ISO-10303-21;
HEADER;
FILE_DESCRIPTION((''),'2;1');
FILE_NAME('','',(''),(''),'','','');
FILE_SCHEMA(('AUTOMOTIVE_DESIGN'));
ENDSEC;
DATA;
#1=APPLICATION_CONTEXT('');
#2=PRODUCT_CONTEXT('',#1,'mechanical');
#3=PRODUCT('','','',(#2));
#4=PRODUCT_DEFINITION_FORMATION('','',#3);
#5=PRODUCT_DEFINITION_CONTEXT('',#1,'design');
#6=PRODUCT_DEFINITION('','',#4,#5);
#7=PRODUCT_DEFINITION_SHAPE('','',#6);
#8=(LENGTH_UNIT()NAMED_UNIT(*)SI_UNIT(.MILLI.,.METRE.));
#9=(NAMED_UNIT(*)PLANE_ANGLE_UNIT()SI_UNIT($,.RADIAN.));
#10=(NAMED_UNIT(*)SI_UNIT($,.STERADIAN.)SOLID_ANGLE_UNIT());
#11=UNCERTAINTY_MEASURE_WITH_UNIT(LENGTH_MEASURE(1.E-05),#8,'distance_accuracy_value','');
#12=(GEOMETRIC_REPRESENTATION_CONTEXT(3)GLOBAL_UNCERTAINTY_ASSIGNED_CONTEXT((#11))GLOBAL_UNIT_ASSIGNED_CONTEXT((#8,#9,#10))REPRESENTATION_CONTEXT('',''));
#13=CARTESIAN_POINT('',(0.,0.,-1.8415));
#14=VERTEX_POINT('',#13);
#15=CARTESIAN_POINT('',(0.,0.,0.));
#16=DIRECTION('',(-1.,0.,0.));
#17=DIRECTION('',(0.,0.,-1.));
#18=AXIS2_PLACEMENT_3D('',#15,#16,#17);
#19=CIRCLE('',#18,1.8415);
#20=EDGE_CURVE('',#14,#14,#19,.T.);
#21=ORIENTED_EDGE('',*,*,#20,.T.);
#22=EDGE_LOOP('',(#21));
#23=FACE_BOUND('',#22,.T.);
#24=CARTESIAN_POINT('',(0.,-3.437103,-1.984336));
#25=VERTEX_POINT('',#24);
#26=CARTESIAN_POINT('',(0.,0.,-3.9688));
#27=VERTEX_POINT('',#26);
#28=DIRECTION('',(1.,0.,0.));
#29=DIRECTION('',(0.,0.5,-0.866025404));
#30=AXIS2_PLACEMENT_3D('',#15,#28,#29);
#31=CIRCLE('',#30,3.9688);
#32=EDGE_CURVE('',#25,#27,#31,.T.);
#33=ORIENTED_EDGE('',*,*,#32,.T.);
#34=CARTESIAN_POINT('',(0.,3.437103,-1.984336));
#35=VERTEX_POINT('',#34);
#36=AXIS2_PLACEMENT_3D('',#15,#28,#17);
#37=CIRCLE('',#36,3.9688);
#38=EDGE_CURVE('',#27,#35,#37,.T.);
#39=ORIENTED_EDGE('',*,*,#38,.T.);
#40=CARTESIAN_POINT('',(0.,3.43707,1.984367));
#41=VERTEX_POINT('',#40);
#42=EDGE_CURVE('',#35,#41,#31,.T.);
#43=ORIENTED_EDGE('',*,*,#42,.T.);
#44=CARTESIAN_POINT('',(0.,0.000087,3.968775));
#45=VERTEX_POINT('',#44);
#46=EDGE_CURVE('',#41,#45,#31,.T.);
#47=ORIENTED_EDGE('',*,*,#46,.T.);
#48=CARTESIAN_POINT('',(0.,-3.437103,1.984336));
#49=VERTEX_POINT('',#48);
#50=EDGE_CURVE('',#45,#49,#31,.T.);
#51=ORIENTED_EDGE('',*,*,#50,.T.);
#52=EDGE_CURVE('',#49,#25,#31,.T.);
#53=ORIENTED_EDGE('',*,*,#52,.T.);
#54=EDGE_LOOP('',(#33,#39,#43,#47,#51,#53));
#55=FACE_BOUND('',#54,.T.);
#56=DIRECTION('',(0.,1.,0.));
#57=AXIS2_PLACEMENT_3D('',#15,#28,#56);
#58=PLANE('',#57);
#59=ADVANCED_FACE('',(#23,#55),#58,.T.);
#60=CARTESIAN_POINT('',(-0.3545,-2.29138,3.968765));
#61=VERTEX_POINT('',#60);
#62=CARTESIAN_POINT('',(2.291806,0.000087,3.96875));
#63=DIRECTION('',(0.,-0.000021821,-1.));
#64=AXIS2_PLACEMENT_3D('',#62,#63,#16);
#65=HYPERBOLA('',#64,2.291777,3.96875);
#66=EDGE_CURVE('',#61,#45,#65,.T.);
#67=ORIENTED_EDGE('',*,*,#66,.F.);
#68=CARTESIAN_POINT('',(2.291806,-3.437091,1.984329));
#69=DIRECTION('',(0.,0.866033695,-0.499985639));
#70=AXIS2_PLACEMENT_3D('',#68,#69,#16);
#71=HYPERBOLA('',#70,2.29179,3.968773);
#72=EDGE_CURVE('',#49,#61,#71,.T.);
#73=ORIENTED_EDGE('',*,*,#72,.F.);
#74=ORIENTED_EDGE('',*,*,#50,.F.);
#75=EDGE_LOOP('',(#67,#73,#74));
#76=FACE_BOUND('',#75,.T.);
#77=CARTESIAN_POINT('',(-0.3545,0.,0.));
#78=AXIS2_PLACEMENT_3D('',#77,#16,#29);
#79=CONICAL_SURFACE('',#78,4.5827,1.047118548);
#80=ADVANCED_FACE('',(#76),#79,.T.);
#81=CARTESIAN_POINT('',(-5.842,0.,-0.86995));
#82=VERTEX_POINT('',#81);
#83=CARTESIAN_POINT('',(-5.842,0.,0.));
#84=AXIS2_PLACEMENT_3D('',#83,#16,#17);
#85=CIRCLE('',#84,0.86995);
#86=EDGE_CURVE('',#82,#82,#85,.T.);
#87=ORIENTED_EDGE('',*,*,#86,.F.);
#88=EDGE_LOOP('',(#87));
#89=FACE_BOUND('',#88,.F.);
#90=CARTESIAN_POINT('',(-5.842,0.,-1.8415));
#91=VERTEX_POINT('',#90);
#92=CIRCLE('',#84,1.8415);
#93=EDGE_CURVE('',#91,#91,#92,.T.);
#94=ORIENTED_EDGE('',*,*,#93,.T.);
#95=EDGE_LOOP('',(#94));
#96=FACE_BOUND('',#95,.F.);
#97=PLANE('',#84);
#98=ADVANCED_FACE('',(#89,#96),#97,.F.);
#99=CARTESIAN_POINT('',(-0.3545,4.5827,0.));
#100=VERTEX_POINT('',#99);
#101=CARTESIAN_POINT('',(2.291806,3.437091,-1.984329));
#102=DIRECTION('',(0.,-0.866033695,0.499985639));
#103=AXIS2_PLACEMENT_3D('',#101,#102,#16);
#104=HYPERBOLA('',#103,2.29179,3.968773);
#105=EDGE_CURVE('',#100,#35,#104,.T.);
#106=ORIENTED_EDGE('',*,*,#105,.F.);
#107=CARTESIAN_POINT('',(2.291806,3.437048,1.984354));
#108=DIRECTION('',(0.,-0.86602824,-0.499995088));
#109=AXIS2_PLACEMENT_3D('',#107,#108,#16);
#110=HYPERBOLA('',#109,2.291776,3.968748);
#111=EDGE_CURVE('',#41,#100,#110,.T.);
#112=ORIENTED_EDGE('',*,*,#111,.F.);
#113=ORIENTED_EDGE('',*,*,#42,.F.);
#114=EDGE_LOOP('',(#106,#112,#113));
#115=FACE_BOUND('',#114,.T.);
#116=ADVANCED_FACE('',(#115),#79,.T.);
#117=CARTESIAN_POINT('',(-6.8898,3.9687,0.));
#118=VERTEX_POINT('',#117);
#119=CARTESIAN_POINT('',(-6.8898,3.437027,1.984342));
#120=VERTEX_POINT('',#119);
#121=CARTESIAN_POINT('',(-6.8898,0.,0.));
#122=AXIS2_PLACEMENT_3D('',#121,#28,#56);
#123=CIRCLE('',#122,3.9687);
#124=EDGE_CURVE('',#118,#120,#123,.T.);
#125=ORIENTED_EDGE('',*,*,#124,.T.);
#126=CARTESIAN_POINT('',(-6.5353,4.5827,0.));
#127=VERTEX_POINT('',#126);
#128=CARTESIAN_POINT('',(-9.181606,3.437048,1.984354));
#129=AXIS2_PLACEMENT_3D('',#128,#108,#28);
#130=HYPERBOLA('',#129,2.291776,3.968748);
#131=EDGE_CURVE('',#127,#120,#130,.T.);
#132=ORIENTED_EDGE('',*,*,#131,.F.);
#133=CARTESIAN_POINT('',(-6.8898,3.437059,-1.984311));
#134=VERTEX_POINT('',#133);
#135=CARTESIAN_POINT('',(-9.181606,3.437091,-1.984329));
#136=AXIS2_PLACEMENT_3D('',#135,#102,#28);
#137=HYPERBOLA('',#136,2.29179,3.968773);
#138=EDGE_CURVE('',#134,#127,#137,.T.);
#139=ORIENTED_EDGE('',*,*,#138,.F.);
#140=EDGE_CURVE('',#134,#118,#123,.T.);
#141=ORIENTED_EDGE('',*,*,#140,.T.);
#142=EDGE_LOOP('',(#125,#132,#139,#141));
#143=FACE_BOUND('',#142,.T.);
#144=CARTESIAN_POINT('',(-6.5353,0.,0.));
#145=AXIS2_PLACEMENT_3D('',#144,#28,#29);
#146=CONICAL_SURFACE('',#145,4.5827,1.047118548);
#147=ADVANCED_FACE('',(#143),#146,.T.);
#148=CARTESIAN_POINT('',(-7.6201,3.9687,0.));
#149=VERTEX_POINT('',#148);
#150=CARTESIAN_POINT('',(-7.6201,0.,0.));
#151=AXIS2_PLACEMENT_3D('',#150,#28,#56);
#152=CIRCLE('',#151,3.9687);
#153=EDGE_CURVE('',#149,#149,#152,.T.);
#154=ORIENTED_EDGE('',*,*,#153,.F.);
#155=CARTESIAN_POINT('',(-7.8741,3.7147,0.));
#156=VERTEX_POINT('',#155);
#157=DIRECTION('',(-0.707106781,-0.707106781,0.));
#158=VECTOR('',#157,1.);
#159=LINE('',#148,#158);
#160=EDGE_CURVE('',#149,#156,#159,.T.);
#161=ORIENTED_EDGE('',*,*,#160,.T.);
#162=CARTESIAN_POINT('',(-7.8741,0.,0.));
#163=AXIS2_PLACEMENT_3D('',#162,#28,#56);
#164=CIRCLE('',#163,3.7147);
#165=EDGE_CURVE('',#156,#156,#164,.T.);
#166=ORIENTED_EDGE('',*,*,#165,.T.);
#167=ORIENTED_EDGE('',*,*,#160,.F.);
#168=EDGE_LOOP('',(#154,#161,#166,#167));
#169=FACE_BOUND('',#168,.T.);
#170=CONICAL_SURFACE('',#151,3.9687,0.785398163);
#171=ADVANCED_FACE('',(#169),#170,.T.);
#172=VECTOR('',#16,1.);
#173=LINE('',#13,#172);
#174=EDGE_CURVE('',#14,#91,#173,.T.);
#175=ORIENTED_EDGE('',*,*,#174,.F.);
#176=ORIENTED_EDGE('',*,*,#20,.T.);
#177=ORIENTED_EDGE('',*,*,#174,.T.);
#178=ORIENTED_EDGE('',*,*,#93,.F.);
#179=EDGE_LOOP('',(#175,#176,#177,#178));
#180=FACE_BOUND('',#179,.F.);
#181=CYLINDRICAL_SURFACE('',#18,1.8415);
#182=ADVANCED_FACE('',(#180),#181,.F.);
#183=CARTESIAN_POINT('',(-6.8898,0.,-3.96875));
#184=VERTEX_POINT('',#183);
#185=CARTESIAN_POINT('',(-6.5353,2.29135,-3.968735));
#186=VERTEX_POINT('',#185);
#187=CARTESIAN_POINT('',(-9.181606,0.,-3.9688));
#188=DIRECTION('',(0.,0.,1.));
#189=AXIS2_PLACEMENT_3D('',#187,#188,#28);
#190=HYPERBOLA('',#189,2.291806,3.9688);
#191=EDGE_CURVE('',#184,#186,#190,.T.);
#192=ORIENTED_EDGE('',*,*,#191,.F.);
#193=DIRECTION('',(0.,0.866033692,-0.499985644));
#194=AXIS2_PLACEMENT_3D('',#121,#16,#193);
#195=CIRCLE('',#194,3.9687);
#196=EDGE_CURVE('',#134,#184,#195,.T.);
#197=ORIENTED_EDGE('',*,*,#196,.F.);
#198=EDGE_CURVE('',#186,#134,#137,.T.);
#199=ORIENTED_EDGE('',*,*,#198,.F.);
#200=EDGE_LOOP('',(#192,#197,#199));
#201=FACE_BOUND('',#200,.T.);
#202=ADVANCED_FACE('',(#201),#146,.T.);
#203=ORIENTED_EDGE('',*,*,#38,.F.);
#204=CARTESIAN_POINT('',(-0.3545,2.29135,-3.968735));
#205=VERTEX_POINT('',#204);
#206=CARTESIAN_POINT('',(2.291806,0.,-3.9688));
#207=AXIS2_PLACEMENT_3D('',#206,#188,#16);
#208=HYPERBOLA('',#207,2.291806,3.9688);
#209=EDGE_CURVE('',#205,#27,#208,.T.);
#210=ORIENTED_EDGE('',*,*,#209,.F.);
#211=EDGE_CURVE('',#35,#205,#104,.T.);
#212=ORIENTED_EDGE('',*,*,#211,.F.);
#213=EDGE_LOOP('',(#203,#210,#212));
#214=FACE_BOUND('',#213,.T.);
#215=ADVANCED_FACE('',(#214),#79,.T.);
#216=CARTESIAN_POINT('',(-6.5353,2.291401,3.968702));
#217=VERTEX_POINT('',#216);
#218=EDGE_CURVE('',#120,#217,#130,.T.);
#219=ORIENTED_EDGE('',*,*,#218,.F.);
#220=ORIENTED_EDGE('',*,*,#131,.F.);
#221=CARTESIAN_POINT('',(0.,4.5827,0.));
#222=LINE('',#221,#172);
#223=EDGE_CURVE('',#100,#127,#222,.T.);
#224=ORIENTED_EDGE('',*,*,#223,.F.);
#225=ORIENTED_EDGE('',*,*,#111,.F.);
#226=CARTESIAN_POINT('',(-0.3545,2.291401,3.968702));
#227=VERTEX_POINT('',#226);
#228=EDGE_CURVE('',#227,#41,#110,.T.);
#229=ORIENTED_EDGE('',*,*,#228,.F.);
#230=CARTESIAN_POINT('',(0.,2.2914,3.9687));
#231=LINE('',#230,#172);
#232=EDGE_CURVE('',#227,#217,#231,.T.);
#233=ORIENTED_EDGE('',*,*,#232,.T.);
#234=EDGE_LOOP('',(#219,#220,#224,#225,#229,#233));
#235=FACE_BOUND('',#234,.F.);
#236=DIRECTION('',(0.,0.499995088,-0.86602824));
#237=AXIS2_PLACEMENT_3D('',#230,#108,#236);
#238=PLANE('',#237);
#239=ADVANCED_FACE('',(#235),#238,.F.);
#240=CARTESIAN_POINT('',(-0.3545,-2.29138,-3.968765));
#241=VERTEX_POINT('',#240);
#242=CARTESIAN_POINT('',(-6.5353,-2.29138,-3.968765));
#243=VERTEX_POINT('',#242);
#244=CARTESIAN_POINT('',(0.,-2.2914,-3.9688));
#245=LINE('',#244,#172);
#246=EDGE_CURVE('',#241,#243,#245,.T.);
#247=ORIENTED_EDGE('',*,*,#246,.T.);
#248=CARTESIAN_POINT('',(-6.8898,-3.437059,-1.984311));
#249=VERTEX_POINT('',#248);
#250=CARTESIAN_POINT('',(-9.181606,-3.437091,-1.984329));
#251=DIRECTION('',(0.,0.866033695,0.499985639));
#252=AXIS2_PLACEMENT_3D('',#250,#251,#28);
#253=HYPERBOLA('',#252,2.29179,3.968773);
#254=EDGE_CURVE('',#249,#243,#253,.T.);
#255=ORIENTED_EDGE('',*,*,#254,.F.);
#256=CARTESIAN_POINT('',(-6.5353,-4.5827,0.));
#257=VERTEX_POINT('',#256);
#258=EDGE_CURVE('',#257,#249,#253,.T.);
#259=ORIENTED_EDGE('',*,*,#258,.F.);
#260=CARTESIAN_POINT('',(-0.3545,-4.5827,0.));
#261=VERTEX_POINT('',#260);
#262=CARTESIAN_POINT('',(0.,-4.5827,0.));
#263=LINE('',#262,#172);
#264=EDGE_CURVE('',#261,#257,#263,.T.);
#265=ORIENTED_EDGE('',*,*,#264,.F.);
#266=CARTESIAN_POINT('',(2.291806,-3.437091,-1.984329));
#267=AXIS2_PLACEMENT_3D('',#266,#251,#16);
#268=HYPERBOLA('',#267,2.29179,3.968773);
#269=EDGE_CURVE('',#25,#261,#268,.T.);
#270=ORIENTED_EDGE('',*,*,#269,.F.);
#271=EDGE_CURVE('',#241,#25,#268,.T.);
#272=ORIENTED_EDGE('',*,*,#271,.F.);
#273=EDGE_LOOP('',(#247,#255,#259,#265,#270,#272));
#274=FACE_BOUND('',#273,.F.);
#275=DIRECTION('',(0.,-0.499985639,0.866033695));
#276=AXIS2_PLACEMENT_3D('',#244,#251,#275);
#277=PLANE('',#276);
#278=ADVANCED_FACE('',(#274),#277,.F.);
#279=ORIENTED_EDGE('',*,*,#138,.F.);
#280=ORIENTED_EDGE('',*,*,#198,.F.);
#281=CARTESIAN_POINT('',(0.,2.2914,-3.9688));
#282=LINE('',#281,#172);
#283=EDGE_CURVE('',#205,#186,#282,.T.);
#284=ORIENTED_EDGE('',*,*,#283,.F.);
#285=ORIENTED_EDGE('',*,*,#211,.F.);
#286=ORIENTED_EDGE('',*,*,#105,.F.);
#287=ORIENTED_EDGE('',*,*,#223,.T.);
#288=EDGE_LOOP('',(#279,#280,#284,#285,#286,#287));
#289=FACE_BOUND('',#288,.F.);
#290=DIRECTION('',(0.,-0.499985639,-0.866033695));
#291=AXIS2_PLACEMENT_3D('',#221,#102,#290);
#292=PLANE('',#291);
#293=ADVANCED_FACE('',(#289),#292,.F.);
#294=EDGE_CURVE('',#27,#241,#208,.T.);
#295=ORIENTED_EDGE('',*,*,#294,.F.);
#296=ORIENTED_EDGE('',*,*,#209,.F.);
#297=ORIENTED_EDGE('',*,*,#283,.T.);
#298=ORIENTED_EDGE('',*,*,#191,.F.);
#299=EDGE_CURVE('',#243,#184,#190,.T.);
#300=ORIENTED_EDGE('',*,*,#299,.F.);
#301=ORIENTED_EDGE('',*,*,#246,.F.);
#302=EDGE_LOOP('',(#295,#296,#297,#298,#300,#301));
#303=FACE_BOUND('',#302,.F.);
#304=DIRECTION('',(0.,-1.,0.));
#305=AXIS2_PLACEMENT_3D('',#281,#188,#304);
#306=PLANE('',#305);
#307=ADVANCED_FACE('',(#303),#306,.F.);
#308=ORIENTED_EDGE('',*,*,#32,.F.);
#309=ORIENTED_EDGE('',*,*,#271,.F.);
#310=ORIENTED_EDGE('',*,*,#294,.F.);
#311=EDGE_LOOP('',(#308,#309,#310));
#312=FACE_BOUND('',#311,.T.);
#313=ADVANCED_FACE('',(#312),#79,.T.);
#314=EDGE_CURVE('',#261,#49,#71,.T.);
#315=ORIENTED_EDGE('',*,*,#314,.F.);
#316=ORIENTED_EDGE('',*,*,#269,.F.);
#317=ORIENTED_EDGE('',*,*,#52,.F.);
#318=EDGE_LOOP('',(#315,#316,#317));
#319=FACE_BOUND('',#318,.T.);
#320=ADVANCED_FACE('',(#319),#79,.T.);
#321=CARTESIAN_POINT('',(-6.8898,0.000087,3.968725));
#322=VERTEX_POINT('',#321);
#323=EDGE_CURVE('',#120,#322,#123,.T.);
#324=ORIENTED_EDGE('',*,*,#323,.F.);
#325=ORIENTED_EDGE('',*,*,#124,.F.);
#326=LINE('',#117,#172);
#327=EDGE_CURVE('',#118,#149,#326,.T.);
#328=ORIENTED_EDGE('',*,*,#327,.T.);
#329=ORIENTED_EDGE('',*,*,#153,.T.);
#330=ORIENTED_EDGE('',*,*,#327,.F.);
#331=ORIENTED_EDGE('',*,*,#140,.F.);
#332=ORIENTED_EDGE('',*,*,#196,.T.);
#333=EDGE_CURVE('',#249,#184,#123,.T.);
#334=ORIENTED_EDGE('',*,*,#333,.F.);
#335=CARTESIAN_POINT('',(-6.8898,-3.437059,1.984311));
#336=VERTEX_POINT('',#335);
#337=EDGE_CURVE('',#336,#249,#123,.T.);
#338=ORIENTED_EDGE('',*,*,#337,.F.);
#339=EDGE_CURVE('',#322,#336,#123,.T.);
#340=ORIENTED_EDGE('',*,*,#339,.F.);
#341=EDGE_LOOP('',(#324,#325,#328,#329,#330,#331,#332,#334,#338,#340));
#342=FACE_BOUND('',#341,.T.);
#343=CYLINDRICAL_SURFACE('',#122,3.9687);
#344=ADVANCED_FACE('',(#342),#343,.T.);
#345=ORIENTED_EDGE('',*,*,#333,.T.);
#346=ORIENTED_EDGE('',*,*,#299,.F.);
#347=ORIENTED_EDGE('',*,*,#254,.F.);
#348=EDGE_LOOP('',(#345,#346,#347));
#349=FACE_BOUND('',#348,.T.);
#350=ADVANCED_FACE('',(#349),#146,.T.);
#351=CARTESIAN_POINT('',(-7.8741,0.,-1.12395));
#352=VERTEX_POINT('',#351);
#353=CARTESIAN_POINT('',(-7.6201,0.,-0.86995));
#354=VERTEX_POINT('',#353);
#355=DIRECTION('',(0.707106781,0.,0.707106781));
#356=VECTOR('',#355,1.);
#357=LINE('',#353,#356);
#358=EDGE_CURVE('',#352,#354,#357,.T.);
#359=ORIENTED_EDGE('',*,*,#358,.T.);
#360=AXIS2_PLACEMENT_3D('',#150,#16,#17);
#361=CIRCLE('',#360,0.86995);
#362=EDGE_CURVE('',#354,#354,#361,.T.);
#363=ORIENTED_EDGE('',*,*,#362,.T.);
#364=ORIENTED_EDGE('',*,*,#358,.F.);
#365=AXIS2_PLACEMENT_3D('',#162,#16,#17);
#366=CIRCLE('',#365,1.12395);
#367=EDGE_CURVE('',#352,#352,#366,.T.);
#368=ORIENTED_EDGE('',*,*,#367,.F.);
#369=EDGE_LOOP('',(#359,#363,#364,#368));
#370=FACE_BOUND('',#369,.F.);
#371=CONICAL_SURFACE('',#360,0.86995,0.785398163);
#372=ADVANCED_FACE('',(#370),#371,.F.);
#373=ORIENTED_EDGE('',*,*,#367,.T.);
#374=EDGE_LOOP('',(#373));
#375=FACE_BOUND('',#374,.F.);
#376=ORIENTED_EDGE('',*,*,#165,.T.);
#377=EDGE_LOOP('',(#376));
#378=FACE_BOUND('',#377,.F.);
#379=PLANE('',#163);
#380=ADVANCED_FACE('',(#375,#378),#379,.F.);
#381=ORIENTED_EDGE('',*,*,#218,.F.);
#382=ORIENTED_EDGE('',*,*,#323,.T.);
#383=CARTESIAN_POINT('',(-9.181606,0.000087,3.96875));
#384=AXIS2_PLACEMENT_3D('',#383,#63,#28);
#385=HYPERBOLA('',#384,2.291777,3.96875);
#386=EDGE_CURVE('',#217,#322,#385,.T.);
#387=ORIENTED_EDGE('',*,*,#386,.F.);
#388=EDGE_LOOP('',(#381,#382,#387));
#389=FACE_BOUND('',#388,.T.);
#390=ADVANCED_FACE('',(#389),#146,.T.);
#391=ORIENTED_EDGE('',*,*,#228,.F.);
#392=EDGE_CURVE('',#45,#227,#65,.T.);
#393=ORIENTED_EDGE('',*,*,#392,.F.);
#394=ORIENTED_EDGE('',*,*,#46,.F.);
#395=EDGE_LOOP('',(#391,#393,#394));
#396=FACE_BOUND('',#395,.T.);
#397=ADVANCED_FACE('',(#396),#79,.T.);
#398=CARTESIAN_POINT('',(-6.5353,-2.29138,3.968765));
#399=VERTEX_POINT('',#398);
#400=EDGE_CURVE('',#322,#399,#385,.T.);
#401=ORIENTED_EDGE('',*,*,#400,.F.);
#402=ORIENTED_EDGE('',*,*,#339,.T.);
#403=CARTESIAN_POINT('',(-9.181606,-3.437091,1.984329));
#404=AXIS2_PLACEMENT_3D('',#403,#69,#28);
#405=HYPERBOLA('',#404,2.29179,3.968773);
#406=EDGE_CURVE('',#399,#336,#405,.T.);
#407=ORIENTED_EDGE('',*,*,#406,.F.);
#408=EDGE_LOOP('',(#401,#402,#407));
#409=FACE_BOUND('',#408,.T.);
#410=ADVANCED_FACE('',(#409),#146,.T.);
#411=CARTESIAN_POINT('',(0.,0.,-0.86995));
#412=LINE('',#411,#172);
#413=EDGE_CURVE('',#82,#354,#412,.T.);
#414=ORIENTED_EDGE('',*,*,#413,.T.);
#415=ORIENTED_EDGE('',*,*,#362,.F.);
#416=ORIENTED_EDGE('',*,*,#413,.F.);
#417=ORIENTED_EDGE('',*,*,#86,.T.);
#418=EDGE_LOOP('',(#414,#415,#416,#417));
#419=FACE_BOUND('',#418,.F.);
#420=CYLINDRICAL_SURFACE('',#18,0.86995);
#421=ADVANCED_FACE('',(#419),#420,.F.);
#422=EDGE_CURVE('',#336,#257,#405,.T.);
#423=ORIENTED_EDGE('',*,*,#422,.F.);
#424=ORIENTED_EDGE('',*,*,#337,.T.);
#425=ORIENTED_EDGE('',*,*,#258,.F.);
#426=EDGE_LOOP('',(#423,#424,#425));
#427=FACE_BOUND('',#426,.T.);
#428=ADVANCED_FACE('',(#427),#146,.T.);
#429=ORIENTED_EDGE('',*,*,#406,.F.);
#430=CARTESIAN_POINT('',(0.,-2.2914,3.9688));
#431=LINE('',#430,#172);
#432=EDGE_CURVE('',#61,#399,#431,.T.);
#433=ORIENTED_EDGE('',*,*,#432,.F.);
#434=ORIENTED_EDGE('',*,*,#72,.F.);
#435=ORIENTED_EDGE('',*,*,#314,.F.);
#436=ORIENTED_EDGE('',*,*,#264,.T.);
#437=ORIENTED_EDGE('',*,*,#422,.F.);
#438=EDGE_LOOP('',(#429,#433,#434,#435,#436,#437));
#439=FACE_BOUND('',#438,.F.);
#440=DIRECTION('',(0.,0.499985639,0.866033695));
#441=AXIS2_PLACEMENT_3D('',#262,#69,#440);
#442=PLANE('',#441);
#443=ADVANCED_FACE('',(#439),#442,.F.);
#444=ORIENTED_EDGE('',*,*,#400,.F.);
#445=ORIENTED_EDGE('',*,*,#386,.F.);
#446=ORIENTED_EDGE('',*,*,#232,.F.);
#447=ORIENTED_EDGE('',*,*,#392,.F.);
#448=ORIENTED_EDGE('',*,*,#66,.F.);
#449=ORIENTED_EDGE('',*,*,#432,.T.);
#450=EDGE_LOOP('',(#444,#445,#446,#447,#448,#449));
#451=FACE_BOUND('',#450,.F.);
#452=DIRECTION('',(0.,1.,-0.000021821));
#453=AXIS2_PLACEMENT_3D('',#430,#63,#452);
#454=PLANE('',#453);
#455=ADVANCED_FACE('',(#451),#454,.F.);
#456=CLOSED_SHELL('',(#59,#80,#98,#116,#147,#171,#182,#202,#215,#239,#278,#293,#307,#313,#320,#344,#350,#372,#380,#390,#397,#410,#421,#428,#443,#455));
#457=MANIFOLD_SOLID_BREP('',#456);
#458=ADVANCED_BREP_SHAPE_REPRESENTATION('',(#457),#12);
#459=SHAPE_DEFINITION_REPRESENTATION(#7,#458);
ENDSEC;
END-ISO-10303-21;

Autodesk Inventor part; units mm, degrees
ref_plane "YZ Plane" through (0, 0, 0) normal (1, 0, 0) x (0, 1, 0)
sketch "Sketch1: Hex" plane through (0, 0, 0) normal (1, 0, 0) x (0, 1, 0)
  line L0 (-2.2914, 3.9688) -> (2.2914, 3.9687)
  line L1 (2.2914, 3.9687) -> (4.5827, 0)
  line L2 (4.5827, 0) -> (2.2914, -3.9688)
  line L3 (2.2914, -3.9688) -> (-2.2914, -3.9688)
  line L4 (-2.2914, -3.9688) -> (-4.5827, 0)
  line L5 (-4.5827, 0) -> (-2.2914, 3.9688)
  circle A0 centre (0, 0) radius 0.87
  point P0 (0, 3.9687)
  point P1 (0, -3.9688)
  dimension "hex_angle" = 120
  dimension "hex_size" = 7.9375
  dimension "d1" = 1.7399
extrude "Ex: Hex" add sketch "Sketch1: Hex" against normal blind 6.8898 contours L0 L1 L2 L3 L4 L5 | A0
hole "Hole: Tap" [suppressed]
hole "Hole: Thread" at (0, 0, 0) direction (-1, 0, 0) diameter 3.683 depth 5.842 thread size "10-24 UNC" class "2B" standard "ANSI Unified Screw Threads"
sketch "Sketch2: Top" plane through (-6.8898, 0, 0) normal (1, 0, 0) x (0, 1, 0)
  circle A0 centre (0, 0) radius 3.9687
  circle A1 centre (0, 0) radius 3.7147
  dimension "d4" = 7.9375
  dimension "d5" = 7.4295
extrude "Ex: Top" add sketch "Sketch2: Top" against normal blind 0.9843 contours A0 | A1
hole "Hole: Tubing" at (0, 0, 0) direction (-1, 0, 0) diameter 1.7399 end through all
chamfer "Chamfer1: Top (side)" distance 0.254 angle 45 1 edges at (-7.874, -3.9687, 0)
chamfer "Chamfer2: Top (hole)" distance 0.254 angle 45 1 edges at (-7.874, 0, 0.87)
sketch "Sketch3: Reference: Nut Chamfer" plane through (0, 0, 0) normal (1, 0, 0) x (0, 0, -1)
  circle A0 centre (0, 0) radius 3.9688
  line L0 (3.9688, 2.2914) -> (0, 4.5827) projected
ref_plane "Work Plane1" through (0, 2.2914, -3.9688) normal (0, 0.8660254, 0.5) x (-1, 0, 0)
sketch "Sketch4: Chamfer (nut)" plane through (0, 0, 0) normal (0, 0.8660254, 0.5) x (-1, 0, 0)
  line L0 (0, -3.9688) -> (0, -4.5827)
  line L1 (0, -4.5827) -> (0.3545, -4.5827)
  line L2 (0.3545, -4.5827) -> (0, -3.9688)
  line L3 (0, 3.9688) -> (0, -3.9688) projected
  line L4 (8.2677, 0) -> (-1.378, 0) projected
  line L5 (0, -4.5827) -> (6.8898, -4.5827) projected
  point P0 (0, 0)
  dimension "chamfer_angle" = 30
revolve "Revolution: Chamfer (nut)" cut sketch "Sketch4: Chamfer (nut)" angle 360 about axis through (-10, 0, 0) along (1, 0, 0)
ref_plane "Work Plane2: Hex Center" through (-3.4449, 0, 0) normal (1, 0, 0) x (0, 0, -1)
mirror "Mirror: Chamfer (nut)" about plane through (-3.4449, 0, 0) normal (1, 0, 0) of "Revolution: Chamfer (nut)"
properties part number "Nut for Precision Compression Fitting"
